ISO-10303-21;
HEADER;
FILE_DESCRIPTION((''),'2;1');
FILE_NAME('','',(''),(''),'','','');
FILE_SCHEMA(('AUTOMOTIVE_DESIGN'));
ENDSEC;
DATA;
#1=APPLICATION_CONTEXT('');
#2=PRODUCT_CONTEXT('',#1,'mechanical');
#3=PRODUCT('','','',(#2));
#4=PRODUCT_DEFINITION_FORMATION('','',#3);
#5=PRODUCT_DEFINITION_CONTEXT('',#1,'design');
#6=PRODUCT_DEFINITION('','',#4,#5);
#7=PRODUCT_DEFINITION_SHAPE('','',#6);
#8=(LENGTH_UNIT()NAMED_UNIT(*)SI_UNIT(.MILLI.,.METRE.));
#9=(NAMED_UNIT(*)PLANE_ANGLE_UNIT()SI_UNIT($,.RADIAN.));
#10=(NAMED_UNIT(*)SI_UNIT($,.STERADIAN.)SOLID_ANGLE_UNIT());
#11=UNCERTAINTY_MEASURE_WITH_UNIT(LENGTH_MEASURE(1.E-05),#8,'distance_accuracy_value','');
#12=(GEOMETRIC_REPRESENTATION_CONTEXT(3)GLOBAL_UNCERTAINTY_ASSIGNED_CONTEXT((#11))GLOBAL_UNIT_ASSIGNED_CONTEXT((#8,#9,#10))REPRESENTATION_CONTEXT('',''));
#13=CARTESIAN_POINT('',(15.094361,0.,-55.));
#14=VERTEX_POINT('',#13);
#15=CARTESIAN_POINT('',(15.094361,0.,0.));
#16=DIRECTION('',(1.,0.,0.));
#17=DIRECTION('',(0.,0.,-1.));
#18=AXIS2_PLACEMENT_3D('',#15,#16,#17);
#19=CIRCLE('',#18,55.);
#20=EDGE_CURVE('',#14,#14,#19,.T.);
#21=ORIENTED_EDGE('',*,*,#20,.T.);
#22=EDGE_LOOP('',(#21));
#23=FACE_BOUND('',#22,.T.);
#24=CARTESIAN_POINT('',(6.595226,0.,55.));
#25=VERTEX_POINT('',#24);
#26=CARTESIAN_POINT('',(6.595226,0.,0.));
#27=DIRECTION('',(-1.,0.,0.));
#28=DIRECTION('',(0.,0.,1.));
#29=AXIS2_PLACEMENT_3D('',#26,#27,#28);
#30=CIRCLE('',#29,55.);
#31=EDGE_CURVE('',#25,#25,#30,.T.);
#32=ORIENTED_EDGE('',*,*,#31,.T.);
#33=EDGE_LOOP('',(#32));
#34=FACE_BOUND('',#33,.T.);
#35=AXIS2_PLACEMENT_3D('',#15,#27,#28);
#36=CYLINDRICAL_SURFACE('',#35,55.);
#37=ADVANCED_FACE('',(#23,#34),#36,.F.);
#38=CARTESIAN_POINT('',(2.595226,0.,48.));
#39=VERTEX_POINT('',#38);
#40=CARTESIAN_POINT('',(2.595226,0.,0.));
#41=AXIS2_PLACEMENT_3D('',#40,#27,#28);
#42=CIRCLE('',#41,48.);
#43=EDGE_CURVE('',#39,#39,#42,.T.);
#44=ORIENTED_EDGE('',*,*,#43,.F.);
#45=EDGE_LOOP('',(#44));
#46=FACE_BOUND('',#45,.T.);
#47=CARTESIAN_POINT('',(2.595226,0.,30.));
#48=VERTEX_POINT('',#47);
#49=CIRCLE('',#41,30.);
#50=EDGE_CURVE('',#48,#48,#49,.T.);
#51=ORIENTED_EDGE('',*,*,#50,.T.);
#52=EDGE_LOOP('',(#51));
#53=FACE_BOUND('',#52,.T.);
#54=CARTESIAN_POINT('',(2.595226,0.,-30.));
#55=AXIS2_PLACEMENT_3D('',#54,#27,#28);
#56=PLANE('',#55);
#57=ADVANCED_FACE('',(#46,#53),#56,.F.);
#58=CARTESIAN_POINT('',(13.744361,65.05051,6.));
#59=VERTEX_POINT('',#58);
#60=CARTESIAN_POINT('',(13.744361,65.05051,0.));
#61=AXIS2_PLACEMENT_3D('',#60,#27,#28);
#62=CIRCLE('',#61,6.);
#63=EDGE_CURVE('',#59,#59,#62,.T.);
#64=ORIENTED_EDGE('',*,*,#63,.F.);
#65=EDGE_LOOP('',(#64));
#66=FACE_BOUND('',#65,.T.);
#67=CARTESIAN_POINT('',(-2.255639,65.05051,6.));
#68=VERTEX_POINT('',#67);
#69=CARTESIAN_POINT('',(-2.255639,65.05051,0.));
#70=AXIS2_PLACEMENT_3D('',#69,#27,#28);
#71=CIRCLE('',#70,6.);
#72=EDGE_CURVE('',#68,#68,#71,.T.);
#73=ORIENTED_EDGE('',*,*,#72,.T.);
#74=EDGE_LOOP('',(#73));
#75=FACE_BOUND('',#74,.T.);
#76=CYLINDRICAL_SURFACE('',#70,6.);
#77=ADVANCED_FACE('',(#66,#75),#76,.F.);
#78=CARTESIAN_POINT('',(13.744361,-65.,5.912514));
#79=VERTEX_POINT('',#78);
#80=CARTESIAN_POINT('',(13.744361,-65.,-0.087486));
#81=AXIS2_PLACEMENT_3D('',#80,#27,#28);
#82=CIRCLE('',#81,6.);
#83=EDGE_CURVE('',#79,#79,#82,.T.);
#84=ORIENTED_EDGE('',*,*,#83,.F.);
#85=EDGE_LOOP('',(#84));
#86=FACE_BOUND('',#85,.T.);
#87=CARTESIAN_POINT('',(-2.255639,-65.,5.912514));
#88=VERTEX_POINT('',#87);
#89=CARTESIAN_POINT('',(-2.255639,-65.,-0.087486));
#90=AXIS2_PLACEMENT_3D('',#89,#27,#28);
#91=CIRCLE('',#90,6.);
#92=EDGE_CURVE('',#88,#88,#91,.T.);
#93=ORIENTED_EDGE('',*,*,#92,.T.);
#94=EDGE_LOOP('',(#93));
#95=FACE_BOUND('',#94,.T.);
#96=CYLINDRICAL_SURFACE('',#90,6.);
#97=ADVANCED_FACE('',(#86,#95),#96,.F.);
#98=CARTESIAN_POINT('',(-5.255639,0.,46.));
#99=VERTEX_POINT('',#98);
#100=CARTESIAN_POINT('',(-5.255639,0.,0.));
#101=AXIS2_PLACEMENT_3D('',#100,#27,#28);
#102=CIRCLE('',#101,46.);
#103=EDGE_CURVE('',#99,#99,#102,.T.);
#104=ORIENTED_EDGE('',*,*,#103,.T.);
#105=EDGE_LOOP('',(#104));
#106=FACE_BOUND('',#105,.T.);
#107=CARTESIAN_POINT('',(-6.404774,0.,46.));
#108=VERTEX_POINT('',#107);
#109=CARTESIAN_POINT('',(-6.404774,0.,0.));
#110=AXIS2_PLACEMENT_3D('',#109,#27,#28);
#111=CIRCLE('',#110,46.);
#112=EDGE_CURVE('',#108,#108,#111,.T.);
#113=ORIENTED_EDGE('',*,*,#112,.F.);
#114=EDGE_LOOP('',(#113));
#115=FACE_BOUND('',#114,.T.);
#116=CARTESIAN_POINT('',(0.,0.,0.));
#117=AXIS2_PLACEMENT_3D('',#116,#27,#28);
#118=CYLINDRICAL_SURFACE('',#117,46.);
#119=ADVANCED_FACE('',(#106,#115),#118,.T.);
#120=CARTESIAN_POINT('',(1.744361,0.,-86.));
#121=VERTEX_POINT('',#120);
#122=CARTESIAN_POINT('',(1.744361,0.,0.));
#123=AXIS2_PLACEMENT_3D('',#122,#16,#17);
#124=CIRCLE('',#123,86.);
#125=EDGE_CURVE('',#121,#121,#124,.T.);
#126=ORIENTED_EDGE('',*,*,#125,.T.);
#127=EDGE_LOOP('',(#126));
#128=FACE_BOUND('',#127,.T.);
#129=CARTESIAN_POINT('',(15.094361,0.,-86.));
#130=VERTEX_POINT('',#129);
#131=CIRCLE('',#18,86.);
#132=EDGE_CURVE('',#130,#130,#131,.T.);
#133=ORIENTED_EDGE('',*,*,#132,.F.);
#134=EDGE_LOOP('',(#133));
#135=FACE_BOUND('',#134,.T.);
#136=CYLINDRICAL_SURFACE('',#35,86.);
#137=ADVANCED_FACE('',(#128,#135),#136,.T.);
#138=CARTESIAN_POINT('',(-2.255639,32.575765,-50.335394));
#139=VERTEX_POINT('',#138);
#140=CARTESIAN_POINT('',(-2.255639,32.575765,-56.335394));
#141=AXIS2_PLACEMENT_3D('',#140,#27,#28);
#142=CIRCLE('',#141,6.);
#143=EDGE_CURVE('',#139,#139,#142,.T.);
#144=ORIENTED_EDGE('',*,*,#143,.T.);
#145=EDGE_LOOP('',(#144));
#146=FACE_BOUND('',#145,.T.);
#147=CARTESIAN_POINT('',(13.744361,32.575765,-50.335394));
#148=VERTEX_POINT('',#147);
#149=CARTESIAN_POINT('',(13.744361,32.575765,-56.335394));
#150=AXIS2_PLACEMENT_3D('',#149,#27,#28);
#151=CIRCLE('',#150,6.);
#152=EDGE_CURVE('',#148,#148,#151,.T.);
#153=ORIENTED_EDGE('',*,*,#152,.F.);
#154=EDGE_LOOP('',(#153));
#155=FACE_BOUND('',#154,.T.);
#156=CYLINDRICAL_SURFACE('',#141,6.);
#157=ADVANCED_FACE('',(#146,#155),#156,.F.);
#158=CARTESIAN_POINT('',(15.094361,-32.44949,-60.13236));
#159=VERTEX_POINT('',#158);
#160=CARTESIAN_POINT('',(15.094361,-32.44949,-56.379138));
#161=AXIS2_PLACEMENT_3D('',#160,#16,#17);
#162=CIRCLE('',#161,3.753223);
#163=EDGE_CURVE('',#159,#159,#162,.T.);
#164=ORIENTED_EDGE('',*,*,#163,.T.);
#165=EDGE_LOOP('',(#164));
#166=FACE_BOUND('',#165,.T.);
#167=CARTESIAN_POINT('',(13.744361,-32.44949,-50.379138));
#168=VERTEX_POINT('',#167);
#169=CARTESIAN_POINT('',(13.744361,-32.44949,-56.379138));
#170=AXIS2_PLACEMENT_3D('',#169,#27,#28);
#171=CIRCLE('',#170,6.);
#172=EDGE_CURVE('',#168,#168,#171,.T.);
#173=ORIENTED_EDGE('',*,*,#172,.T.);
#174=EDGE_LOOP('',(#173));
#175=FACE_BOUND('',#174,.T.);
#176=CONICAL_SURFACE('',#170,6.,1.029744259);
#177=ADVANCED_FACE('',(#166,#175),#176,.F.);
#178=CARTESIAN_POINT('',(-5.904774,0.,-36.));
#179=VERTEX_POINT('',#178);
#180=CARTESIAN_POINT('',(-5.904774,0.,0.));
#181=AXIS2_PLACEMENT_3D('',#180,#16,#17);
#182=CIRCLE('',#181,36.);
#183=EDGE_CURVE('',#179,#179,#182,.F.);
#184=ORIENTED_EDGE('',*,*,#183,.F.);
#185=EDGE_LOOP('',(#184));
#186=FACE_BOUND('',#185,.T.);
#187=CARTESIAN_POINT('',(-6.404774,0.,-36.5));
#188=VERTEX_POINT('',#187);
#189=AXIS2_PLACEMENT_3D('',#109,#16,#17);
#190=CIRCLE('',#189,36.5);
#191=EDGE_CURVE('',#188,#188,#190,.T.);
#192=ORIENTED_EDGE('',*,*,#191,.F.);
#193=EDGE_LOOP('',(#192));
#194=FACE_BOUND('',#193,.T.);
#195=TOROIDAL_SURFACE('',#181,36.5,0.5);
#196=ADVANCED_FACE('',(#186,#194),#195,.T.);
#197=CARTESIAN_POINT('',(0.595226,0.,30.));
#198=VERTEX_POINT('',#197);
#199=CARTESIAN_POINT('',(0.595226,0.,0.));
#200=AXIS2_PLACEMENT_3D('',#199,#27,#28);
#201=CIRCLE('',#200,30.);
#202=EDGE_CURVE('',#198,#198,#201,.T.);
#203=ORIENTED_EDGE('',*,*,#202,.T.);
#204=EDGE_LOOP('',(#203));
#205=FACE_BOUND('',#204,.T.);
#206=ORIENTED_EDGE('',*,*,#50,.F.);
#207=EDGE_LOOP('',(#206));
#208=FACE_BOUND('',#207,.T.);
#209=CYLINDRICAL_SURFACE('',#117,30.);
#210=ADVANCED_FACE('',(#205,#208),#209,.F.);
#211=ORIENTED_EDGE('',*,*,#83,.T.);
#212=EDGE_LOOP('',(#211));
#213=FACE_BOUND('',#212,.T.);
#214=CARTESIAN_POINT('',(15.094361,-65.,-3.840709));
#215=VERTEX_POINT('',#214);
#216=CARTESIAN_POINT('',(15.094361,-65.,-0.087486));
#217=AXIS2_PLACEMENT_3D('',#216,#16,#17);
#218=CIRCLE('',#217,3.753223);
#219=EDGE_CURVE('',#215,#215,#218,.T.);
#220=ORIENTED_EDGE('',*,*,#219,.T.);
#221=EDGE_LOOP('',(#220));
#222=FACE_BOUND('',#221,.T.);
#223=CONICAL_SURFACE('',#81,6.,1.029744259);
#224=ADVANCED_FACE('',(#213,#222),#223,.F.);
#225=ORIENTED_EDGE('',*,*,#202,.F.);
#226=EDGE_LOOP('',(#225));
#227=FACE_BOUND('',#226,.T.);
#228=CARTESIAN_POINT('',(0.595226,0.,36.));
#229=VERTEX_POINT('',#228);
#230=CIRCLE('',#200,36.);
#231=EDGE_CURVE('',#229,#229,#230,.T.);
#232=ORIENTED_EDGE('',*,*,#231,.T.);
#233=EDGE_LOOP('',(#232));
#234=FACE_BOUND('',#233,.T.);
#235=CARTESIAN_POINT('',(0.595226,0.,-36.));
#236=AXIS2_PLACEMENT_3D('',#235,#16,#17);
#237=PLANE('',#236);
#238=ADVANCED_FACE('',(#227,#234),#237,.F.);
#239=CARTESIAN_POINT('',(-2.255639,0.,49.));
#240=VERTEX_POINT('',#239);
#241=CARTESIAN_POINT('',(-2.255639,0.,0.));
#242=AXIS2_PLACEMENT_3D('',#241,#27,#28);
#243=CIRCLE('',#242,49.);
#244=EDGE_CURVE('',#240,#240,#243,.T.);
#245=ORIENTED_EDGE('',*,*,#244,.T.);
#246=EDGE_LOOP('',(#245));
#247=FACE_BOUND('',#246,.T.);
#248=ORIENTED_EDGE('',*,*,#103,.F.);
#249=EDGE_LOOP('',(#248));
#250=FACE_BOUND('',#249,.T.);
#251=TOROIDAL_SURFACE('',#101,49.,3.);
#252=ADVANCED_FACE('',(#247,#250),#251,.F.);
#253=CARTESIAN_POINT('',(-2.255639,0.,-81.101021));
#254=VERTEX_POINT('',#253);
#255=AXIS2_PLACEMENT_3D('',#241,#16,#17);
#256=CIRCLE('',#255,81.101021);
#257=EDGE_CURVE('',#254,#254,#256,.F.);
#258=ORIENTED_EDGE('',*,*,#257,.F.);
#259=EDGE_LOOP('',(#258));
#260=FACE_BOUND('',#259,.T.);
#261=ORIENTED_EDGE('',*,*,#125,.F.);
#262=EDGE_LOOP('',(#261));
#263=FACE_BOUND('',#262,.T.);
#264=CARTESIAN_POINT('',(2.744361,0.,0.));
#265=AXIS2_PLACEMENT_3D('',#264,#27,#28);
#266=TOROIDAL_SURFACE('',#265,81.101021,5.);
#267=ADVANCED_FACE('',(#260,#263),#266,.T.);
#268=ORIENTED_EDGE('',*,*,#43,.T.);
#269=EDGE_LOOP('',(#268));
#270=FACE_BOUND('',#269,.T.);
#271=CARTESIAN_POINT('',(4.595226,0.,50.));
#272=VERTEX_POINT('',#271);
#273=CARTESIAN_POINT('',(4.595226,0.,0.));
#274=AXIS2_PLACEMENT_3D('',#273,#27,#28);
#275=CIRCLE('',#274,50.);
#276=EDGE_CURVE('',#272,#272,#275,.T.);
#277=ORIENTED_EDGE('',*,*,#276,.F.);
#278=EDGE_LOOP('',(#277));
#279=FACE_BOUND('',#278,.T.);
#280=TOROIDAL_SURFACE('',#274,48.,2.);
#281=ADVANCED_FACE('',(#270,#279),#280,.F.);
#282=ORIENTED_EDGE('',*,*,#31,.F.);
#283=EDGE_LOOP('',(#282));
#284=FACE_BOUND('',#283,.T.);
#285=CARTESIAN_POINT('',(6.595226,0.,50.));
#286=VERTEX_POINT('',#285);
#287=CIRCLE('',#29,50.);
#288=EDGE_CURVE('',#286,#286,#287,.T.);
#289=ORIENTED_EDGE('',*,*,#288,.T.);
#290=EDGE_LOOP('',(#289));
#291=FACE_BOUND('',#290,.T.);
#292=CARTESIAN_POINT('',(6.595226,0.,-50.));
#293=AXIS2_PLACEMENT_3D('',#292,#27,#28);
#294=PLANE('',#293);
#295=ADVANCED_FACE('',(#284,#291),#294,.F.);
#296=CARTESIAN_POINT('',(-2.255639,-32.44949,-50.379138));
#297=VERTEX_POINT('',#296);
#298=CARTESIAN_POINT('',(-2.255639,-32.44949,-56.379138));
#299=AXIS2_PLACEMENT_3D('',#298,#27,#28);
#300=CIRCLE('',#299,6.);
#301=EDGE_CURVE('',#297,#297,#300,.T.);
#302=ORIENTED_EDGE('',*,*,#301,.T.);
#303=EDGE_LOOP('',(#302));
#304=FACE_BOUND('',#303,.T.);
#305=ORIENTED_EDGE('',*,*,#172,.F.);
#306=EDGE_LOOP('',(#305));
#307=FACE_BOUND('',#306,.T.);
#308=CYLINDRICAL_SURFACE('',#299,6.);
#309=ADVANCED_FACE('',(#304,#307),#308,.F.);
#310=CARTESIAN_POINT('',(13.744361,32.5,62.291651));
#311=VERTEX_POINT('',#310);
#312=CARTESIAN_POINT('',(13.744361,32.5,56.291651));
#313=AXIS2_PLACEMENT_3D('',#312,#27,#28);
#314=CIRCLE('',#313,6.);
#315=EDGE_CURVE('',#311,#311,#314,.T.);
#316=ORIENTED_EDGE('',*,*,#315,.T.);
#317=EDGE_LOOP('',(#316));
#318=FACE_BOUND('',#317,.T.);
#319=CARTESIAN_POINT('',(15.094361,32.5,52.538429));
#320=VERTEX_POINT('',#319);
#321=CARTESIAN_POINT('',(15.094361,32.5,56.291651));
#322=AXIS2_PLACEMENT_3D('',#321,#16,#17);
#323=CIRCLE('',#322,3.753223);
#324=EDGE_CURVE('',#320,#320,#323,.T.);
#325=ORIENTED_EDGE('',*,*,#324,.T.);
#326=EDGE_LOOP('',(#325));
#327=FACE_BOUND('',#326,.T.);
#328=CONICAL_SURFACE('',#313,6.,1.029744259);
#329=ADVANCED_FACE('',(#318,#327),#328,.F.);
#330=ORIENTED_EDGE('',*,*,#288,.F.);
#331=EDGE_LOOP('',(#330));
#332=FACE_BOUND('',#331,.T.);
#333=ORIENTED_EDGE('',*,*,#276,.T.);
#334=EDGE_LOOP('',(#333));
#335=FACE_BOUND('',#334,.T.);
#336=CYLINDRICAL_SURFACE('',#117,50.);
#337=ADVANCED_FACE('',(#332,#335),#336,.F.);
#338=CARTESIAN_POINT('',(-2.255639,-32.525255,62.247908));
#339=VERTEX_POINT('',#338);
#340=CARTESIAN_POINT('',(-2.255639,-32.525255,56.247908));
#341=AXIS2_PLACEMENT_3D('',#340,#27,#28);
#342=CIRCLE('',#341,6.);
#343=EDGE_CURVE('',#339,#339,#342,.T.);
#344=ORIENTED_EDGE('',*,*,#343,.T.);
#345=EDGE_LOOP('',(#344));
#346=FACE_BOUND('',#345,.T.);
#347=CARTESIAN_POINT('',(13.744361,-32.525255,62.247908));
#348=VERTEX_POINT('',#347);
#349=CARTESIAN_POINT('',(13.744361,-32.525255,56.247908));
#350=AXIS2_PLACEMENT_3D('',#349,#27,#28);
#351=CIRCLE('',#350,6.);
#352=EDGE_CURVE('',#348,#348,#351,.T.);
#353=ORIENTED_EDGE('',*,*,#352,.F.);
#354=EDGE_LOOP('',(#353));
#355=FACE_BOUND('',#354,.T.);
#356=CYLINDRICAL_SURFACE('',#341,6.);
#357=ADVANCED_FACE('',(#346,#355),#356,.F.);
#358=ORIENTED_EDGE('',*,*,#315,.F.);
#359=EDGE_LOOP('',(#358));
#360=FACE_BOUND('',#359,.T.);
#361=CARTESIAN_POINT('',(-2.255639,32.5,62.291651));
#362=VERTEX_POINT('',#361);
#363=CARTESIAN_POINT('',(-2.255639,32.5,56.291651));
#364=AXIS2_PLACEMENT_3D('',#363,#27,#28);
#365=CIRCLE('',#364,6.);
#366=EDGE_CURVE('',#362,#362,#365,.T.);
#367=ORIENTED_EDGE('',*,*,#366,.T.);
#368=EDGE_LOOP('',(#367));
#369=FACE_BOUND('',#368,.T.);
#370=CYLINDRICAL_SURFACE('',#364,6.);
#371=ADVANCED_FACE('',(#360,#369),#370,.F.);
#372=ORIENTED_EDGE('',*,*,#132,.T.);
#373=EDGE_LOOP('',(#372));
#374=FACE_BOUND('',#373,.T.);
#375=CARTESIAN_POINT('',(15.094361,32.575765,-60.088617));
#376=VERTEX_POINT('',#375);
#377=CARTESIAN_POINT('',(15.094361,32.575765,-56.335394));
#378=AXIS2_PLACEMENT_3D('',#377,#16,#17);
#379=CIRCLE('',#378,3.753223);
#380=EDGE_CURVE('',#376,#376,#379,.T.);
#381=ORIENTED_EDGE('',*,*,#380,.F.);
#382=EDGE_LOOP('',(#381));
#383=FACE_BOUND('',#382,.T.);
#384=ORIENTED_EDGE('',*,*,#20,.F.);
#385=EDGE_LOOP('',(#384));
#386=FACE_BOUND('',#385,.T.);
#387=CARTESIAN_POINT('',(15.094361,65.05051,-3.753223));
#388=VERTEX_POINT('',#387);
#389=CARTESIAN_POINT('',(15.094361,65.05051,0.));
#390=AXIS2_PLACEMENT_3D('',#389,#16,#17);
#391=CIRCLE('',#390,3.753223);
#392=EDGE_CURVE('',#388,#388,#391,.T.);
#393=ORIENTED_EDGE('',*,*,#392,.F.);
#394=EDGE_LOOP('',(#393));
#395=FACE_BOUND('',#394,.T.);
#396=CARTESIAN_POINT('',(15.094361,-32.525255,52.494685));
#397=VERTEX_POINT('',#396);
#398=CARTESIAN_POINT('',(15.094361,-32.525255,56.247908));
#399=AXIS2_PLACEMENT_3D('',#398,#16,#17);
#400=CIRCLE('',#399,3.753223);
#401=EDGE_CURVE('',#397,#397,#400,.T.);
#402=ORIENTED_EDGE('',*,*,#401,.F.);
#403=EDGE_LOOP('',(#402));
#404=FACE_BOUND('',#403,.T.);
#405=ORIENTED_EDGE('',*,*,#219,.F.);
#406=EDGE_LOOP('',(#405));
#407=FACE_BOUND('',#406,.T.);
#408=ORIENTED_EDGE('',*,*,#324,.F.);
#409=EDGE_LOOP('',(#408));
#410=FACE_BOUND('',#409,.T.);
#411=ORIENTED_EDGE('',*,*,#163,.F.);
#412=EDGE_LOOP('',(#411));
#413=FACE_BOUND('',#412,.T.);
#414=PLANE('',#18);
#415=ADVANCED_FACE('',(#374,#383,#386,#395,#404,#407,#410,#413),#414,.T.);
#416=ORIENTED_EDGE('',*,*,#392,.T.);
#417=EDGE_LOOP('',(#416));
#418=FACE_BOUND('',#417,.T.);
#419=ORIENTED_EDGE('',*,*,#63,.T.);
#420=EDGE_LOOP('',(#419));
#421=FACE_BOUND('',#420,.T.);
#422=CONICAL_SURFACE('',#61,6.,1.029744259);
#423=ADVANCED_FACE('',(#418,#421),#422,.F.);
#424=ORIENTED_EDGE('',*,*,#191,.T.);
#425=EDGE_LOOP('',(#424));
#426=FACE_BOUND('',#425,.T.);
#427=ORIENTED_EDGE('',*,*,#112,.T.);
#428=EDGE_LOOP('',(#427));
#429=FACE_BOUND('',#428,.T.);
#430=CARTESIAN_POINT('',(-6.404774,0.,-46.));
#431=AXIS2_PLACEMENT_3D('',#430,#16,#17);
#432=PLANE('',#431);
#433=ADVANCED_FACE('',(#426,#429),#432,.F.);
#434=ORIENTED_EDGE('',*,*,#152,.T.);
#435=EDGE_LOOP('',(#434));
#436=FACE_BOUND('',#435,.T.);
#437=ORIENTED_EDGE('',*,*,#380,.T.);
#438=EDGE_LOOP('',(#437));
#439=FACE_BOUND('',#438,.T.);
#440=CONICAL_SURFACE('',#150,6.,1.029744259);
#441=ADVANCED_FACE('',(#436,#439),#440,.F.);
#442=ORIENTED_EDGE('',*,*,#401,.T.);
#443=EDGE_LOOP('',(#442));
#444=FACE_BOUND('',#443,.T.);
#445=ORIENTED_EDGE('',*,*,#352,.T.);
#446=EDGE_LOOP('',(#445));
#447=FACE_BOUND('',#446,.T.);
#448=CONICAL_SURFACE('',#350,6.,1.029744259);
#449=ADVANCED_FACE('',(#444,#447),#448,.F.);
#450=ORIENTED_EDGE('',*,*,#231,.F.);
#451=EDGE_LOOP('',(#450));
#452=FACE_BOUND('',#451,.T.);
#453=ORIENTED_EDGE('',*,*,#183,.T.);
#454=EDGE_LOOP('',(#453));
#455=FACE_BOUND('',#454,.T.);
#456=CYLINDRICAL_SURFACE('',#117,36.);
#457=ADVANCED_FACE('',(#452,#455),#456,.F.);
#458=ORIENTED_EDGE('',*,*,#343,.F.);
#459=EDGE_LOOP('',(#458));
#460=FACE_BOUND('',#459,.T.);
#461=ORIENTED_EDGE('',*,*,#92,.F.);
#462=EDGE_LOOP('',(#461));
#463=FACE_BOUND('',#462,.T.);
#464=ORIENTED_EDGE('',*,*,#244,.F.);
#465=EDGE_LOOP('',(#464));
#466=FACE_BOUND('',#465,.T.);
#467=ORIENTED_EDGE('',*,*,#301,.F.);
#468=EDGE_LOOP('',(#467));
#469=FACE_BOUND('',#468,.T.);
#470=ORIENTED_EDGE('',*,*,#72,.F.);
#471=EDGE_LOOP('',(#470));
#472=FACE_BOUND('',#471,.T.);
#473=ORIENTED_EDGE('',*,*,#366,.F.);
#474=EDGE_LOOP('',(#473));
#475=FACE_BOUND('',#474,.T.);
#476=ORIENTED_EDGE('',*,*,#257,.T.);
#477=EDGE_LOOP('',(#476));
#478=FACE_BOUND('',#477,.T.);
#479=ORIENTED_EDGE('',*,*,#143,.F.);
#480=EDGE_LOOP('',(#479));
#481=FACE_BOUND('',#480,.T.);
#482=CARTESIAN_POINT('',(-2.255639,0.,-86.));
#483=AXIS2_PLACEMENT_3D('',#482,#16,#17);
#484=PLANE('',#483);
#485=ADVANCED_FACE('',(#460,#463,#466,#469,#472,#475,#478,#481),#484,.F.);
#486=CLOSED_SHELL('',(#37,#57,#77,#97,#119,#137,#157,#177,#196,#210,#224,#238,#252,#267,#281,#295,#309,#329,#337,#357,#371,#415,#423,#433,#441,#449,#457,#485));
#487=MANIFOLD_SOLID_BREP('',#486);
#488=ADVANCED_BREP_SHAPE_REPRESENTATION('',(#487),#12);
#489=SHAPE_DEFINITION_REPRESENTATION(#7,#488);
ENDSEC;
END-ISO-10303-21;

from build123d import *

# Parameters (mm, degrees)
FILLET1_R                  = 0.5
FILLET5_R                  = 5
SKETCH12_R                 = 86
SKETCH12_R_2               = 55
BOSS_EXTRUDE1_DEPTH        = 13.35
M14X2_0_TAPPED_HOLE2_D     = 12
M14X2_0_TAPPED_HOLE2_DEPTH = 16
M14X2_0_TAPPED_HOLE2_TIP   = 3.605163714


with BuildPart() as part:
    # Sketch1 → Revolve1 (revolve)
    with BuildSketch(Plane(origin=(0, 0, 0), x_dir=(1, 0, 0), z_dir=(0, 1, 0)), mode=Mode.PRIVATE) as revolve1_sk:
        with BuildLine():
            Line((0.595225647, 30), (2.595225647, 30))
            Line((2.595225647, 30), (2.595225647, 48))
            ThreePointArc((2.595225647, 48), (3.181012085, 49.414213562), (4.595225647, 50))
            Line((4.595225647, 50), (6.595225647, 50))
            Line((6.595225647, 50), (6.595225647, 55))
            Line((6.595225647, 55), (1.744360585, 55))
            Line((1.744360585, 55), (1.744360585, 86))
            Line((1.744360585, 86), (-2.255639415, 86))
            Line((-2.255639415, 86), (-2.255639415, 49))
            ThreePointArc((-2.255639415, 49), (-3.134319072, 46.878679656), (-5.255639415, 46))
            Line((-5.255639415, 46), (-6.404774353, 46))
            Line((-6.404774353, 46), (-6.404774353, 36))
            Line((-6.404774353, 36), (0.595225647, 36))
            Line((0.595225647, 36), (0.595225647, 30))
        make_face()
    revolve(revolve1_sk.sketch.rotate(Axis((0, 0, 0), (1, 0, 0)), 180), axis=Axis((0, 0, 0), (1, 0, 0)))

    # Fillet1
    fillet1_edges = [part.edges().sort_by_distance(p)[0] for p in [
        (-6.404774353, 0, -36),
    ]]
    fillet(fillet1_edges, radius=FILLET1_R)

    # Fillet5
    # the kernel refuses this fillet: 5 mm, written as the material it takes off along each edge
    with BuildSketch(Plane(origin=(-2.255639415, 0, 0), x_dir=(0, 0, 1), z_dir=(0, 1, 0))) as fillet5_piece_1:
        with BuildLine():
            CenterArc((81.101020514, 5), FILLET5_R, 270, 78.463040967)
            Line((86, 4), (86.09797959, 3.98))
            ThreePointArc((86.09797959, 3.98), (86.1, 2), (86.1, 0))
            Line((86.1, 0), (86, -0.1))
            Line((86, -0.1), (81.101020514, -0.1))
            Line((81.101020514, -0.1), (81.101020514, 0))
        make_face()
    revolve(axis=Axis((-2.255639415, 0, 0), (1, 0, 0)), mode=Mode.SUBTRACT)

    # Sketch12 → Boss-Extrude1 (add)
    with BuildSketch(Plane(origin=(1.744360585, 0, 0), x_dir=(0, 0, -1), z_dir=(1, 0, 0))):
        Circle(SKETCH12_R)
        with Locations(Location((0, 0, 0), (0, 0, 180))):
            Circle(SKETCH12_R_2, mode=Mode.SUBTRACT)
    extrude(amount=BOSS_EXTRUDE1_DEPTH)

    # M14x2.0 Tapped Hole2
    with Locations(Plane.ZY.offset(2.255639415)):
        with Locations((-56.335394412, 32.575765386), (0, 65.050510257), (56.291651246, 32.5), (56.24790808, -32.525255129), (-0.087486332, -65), (-56.379137578, -32.449489743)):
            Hole(M14X2_0_TAPPED_HOLE2_D / 2, depth=M14X2_0_TAPPED_HOLE2_DEPTH)
            with Locations((0, 0, -(M14X2_0_TAPPED_HOLE2_DEPTH + M14X2_0_TAPPED_HOLE2_TIP / 2))):  # 118° drill point
                Cone(0, M14X2_0_TAPPED_HOLE2_D / 2, M14X2_0_TAPPED_HOLE2_TIP, mode=Mode.SUBTRACT)


solid = part.part
